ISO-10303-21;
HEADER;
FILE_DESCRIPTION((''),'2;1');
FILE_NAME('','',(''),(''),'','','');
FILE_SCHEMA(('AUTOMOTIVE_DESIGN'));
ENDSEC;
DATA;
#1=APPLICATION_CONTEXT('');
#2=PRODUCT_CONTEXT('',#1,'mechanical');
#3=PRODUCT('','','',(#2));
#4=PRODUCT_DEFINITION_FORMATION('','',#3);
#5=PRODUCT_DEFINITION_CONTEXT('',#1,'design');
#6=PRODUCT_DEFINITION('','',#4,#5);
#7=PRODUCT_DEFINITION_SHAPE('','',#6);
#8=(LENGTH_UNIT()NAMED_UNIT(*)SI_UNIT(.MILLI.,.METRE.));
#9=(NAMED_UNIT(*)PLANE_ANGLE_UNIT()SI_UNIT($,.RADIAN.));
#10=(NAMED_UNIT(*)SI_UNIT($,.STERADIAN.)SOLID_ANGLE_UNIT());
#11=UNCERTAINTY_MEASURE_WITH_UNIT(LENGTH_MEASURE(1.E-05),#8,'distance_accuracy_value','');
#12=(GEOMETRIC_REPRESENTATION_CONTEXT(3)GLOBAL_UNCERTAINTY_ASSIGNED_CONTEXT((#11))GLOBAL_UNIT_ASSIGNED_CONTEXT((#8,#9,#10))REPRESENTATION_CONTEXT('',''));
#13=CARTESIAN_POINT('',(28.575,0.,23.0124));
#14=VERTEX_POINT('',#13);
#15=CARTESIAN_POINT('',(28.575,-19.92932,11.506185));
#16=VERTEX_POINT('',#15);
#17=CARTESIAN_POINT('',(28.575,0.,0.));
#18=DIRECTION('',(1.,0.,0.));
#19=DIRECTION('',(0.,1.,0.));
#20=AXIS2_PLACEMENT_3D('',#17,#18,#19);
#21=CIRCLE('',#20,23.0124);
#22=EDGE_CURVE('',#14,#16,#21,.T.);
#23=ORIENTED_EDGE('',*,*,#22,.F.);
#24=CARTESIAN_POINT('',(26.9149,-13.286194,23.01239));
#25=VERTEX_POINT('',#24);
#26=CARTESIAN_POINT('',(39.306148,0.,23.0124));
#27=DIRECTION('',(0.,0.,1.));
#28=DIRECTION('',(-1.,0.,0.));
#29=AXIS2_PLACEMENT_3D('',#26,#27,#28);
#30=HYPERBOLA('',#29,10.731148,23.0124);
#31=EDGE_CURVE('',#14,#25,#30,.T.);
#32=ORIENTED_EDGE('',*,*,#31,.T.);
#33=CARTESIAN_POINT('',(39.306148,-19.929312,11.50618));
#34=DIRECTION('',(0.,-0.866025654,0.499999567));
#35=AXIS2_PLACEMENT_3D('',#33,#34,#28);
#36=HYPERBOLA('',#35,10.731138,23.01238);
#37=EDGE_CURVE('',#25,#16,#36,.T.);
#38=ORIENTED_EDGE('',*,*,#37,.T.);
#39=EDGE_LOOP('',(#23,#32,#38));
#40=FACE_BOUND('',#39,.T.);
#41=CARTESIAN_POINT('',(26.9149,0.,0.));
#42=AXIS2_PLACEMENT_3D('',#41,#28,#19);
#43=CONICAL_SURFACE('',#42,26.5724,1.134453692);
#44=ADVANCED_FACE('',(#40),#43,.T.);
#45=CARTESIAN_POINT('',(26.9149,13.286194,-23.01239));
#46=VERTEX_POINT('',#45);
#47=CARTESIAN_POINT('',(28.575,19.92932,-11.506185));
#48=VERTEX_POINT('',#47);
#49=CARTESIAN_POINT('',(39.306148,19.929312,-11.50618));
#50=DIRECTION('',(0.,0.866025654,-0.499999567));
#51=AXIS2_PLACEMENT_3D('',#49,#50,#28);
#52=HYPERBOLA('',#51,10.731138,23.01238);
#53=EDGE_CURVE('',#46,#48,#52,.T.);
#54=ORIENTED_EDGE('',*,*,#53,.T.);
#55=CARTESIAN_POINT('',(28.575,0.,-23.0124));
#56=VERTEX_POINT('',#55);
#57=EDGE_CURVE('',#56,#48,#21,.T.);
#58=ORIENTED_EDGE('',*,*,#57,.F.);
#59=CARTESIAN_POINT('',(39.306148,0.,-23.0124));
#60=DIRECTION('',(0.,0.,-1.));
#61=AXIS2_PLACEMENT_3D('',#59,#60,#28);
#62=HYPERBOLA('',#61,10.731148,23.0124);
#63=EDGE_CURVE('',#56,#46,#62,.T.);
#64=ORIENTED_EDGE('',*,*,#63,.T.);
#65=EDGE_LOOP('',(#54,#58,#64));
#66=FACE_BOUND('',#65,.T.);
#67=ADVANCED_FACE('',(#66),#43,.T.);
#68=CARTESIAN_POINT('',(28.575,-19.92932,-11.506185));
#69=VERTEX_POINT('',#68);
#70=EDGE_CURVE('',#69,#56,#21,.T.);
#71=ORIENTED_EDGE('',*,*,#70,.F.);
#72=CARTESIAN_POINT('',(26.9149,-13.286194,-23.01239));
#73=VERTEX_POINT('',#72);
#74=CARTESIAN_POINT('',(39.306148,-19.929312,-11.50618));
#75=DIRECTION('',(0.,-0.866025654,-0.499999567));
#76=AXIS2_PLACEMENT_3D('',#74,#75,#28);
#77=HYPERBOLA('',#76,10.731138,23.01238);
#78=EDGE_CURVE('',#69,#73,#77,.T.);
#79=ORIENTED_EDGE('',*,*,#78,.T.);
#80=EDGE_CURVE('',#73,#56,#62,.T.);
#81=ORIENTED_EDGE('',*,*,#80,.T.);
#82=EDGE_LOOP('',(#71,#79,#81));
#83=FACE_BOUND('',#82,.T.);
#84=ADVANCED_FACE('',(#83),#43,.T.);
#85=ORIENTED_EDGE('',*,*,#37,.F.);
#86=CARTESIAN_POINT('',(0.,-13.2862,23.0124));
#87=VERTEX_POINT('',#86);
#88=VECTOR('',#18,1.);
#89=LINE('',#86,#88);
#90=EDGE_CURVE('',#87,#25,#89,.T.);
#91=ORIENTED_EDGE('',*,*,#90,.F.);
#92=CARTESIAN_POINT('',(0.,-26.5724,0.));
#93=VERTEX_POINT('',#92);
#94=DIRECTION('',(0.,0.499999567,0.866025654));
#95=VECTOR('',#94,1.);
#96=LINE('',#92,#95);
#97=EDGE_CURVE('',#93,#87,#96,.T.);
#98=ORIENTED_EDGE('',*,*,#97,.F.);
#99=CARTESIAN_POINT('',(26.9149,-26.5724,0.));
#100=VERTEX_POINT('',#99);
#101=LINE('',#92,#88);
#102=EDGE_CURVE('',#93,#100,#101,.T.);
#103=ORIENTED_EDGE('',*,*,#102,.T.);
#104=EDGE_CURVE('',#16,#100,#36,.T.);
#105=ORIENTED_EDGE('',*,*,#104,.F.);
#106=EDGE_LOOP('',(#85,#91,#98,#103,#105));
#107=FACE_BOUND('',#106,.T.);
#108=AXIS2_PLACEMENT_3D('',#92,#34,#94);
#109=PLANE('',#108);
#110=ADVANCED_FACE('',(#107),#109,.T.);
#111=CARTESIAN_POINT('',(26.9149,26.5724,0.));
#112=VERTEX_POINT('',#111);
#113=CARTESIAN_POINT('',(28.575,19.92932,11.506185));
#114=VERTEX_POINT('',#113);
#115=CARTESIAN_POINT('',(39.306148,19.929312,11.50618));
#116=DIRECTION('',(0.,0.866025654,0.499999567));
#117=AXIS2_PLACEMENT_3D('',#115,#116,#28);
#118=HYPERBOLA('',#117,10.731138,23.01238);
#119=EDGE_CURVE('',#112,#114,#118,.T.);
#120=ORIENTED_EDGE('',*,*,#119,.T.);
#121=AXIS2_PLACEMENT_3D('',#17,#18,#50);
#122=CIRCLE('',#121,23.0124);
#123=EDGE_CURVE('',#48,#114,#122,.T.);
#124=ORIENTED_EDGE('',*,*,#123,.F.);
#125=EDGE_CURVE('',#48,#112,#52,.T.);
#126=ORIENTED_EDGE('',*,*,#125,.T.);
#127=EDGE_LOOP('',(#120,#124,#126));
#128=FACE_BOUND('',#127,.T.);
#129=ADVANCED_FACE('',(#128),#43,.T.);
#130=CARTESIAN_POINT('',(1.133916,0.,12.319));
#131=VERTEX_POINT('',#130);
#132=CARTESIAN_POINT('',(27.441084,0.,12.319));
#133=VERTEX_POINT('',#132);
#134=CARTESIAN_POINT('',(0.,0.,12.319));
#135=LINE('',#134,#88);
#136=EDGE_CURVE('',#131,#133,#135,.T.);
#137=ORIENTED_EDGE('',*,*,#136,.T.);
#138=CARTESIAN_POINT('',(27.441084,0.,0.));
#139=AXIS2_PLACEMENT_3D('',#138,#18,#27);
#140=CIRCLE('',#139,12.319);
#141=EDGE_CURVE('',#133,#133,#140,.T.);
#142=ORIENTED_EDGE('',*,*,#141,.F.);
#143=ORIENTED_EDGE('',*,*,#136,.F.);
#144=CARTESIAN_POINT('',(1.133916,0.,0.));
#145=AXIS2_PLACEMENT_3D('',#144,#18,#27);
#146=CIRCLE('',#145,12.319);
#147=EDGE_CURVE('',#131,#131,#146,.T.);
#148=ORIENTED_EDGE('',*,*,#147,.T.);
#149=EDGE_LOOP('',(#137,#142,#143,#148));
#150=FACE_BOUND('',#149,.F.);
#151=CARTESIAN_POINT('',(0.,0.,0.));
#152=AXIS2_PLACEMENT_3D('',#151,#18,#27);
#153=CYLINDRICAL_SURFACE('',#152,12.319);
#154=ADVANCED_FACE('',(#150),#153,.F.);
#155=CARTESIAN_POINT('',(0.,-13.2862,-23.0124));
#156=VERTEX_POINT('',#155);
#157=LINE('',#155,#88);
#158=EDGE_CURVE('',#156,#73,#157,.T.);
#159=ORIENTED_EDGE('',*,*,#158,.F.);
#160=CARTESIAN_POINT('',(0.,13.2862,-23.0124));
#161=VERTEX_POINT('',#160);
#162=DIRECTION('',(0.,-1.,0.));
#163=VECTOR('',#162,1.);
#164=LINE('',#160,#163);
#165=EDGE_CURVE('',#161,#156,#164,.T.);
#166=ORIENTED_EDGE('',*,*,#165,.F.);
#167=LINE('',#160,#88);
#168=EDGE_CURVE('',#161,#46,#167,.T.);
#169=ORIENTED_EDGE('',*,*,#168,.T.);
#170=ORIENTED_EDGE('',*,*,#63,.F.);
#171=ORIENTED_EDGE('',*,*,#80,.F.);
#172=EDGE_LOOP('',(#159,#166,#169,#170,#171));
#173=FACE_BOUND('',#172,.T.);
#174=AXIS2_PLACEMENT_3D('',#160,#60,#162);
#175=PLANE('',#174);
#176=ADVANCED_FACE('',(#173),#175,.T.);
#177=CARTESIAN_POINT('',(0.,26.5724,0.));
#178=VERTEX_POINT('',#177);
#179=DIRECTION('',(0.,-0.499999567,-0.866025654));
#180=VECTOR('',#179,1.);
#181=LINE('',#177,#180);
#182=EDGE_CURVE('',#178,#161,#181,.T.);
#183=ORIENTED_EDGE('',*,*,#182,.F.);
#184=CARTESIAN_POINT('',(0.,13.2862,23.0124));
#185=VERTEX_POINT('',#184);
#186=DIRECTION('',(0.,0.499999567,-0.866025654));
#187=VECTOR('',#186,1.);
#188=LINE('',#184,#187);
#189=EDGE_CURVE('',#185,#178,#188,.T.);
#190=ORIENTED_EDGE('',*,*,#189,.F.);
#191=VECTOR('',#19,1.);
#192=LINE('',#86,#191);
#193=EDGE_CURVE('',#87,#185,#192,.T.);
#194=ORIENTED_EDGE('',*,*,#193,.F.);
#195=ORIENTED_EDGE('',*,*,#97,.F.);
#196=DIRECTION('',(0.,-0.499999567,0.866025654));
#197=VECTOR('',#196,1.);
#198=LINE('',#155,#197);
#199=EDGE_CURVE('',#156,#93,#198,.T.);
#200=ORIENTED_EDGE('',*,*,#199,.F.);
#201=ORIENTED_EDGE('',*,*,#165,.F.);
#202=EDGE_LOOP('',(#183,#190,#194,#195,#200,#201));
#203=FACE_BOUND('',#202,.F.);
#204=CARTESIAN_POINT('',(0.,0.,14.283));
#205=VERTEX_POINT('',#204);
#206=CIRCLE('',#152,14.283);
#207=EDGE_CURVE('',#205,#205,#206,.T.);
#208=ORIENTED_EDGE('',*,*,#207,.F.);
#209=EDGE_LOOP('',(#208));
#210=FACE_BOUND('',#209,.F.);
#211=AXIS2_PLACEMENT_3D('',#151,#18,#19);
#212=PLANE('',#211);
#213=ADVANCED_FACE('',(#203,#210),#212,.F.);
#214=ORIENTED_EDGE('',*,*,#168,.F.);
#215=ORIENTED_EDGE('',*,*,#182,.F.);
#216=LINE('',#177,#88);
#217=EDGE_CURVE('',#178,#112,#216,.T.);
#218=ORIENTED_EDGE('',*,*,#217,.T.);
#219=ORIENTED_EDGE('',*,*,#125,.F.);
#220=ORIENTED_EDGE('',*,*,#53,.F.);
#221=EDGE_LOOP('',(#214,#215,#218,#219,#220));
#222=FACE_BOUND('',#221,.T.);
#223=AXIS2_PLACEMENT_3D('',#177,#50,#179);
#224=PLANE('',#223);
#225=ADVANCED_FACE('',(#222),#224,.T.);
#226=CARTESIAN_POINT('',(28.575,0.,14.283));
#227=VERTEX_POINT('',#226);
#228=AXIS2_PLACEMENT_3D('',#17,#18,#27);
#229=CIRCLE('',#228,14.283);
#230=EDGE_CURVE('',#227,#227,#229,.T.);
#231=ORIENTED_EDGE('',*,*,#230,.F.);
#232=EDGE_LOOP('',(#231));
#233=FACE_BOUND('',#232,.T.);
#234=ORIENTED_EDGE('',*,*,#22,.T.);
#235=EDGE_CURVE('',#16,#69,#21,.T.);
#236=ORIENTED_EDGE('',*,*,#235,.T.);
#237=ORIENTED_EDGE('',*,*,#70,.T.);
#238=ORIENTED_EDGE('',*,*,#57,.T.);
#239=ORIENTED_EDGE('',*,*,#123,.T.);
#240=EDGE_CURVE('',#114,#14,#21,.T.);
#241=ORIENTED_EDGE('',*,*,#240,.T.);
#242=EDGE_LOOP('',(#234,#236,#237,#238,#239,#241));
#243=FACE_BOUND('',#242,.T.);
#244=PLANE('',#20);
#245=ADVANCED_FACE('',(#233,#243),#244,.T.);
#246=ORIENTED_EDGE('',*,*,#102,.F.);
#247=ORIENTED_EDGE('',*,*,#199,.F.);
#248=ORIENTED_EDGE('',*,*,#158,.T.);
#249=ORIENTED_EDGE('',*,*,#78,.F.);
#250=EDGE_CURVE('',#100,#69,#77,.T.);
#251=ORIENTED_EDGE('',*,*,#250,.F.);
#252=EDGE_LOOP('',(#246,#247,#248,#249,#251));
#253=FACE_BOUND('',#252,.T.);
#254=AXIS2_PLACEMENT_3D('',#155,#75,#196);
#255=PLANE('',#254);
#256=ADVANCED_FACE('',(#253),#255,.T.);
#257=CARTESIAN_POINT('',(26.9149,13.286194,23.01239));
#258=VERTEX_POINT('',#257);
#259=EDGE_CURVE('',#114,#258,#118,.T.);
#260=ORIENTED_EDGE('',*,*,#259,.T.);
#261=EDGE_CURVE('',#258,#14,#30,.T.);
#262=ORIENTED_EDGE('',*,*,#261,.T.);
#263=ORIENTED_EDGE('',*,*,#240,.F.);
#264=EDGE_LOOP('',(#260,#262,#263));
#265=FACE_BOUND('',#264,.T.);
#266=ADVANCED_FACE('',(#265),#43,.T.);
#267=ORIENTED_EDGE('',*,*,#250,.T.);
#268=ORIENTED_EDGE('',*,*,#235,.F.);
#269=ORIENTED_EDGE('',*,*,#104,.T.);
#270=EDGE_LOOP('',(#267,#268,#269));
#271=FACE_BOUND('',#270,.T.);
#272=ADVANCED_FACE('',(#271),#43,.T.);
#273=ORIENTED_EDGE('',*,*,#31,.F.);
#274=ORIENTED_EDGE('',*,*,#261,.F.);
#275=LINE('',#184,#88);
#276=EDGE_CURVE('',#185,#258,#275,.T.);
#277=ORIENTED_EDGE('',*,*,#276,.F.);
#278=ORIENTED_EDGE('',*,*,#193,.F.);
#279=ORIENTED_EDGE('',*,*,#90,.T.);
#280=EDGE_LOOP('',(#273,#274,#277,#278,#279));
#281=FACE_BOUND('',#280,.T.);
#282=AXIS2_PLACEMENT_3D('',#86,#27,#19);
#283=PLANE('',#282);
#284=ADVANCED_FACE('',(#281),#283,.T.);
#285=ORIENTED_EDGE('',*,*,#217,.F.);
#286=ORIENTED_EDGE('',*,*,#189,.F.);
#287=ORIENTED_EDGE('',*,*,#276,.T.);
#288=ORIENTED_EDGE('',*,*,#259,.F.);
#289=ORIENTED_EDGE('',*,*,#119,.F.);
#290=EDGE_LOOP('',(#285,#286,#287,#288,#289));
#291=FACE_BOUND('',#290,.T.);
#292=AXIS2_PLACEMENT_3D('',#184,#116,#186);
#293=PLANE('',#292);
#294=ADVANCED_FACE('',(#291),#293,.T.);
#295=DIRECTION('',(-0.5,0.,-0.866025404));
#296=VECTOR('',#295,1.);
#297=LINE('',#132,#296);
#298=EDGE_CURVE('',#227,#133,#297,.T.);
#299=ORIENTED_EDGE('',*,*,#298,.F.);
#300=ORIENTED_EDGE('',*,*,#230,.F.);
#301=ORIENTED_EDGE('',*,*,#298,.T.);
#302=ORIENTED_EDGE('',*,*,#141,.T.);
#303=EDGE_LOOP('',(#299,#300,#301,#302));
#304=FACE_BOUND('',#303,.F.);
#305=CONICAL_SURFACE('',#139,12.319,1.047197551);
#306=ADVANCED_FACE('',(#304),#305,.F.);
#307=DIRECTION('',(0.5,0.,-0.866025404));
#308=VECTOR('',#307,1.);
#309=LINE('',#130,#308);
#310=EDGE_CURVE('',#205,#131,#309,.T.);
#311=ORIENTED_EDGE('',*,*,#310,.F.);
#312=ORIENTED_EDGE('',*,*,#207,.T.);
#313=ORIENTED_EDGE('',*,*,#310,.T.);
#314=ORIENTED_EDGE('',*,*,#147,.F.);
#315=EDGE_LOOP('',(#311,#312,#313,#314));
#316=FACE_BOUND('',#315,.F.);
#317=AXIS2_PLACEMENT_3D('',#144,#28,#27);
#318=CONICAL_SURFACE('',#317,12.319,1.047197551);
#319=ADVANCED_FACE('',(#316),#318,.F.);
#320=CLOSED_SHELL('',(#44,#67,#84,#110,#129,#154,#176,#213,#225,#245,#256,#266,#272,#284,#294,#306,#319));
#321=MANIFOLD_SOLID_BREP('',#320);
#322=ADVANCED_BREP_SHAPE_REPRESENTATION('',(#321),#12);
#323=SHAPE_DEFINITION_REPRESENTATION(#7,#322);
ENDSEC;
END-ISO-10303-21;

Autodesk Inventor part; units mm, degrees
ref_plane "YZ Plane" through (0, 0, 0) normal (1, 0, 0) x (0, 1, 0)
ref_plane "XZ Plane" through (0, 0, 0) normal (0, 1, 0) x (-1, 0, 0)
sketch "Sketch1" plane through (0, 0, 0) normal (1, 0, 0) x (0, 1, 0)
  line L0 (26.5724, 0) -> (13.2862, -23.0124)
  line L1 (13.2862, -23.0124) -> (-13.2862, -23.0124)
  line L2 (-13.2862, -23.0124) -> (-26.5724, 0)
  line L3 (-26.5724, 0) -> (-13.2862, 23.0124)
  line L4 (-13.2862, 23.0124) -> (13.2862, 23.0124)
  line L5 (13.2862, 23.0124) -> (26.5724, 0)
  point P0 (0, 0)
  point P1 (0, 0)
  dimension "d0" = 53.1449
extrude "Body" add sketch "Sketch1" along normal blind 28.575
sketch "Sketch2" plane through (0, 0, 0) normal (-1, 0, 0) x (0, 0, 1)
  point P0 (0, 0)
hole "Thread" at (0, 0, 0) direction (1, 0, 0) diameter 24.638 end through all thread size "1 1/8-7 UNC" class "2B" standard "ANSI Unified Screw Threads"
chamfer "Chamfer1" distance 1.964 angle 30 1 edges at (0, 0, -12.319) measured on face at (0, -16.6657, 10.0035)
chamfer "Chamfer2" distance 1.964 angle 30 1 edges at (28.575, 0, -12.319) measured on face at (28.575, -16.6657, 10.0035)
sketch "Sketch3" plane through (0, 0, 0) normal (0, 0, 1) x (1, 0, 0)
  line L0 (0, 26.5724) -> (28.575, 26.5724) projected
  line L1 (28.575, 13.2862) -> (28.575, 26.5724) projected
  line L2 (-5.715, 0) -> (34.29, 0) projected
  line L3 (26.9149, 26.5724) -> (28.575, 23.0124)
  dimension "d3" = 46.0248
  dimension "d4" = 25
revolve "Chamfer3" cut sketch "Sketch3" angle 360 about axis through (-10, 0, 0) along (1, 0, 0)
ref_plane "Work Plane1" through (75.8893, 0, 0) normal (0, 0.8660254, -0.5) x (-1, 0, 0)
equation "\"d0\" = 1.1547 * SW"
equation "\"d1\" = KOH"
equation "\"d3\" = SW01"
equation "\"d4\" = ANG2"
equation "\"d13\" = -0.5 * GD1 + 0.5 * NND"
equation "\"d21\" = -0.5 * GD1 + 0.5 * NND"
equation "\"d15\" = -0.5 * GD1 + 0.5 * NND"
equation "\"d22\" = -0.5 * GD1 + 0.5 * NND"
equation "\"ANG2\" = 25deg"
equation "\"NND\" = 28.575"
equation "\"KOH\" = 28.575"
equation "\"SW\" = 46.0248"
equation "\"SW01\" = SW"
equation "\"TOA\" = 30deg"
equation "\"E0\" = 1.155 * SW"
equation "\"THREADDIA\" = 28.575"
equation "\"GD1\" = 24.646956"
properties part number "ANSI B18.2.2 - 1 1/8 - 7, HHFNI" material "Steel, Mild"
